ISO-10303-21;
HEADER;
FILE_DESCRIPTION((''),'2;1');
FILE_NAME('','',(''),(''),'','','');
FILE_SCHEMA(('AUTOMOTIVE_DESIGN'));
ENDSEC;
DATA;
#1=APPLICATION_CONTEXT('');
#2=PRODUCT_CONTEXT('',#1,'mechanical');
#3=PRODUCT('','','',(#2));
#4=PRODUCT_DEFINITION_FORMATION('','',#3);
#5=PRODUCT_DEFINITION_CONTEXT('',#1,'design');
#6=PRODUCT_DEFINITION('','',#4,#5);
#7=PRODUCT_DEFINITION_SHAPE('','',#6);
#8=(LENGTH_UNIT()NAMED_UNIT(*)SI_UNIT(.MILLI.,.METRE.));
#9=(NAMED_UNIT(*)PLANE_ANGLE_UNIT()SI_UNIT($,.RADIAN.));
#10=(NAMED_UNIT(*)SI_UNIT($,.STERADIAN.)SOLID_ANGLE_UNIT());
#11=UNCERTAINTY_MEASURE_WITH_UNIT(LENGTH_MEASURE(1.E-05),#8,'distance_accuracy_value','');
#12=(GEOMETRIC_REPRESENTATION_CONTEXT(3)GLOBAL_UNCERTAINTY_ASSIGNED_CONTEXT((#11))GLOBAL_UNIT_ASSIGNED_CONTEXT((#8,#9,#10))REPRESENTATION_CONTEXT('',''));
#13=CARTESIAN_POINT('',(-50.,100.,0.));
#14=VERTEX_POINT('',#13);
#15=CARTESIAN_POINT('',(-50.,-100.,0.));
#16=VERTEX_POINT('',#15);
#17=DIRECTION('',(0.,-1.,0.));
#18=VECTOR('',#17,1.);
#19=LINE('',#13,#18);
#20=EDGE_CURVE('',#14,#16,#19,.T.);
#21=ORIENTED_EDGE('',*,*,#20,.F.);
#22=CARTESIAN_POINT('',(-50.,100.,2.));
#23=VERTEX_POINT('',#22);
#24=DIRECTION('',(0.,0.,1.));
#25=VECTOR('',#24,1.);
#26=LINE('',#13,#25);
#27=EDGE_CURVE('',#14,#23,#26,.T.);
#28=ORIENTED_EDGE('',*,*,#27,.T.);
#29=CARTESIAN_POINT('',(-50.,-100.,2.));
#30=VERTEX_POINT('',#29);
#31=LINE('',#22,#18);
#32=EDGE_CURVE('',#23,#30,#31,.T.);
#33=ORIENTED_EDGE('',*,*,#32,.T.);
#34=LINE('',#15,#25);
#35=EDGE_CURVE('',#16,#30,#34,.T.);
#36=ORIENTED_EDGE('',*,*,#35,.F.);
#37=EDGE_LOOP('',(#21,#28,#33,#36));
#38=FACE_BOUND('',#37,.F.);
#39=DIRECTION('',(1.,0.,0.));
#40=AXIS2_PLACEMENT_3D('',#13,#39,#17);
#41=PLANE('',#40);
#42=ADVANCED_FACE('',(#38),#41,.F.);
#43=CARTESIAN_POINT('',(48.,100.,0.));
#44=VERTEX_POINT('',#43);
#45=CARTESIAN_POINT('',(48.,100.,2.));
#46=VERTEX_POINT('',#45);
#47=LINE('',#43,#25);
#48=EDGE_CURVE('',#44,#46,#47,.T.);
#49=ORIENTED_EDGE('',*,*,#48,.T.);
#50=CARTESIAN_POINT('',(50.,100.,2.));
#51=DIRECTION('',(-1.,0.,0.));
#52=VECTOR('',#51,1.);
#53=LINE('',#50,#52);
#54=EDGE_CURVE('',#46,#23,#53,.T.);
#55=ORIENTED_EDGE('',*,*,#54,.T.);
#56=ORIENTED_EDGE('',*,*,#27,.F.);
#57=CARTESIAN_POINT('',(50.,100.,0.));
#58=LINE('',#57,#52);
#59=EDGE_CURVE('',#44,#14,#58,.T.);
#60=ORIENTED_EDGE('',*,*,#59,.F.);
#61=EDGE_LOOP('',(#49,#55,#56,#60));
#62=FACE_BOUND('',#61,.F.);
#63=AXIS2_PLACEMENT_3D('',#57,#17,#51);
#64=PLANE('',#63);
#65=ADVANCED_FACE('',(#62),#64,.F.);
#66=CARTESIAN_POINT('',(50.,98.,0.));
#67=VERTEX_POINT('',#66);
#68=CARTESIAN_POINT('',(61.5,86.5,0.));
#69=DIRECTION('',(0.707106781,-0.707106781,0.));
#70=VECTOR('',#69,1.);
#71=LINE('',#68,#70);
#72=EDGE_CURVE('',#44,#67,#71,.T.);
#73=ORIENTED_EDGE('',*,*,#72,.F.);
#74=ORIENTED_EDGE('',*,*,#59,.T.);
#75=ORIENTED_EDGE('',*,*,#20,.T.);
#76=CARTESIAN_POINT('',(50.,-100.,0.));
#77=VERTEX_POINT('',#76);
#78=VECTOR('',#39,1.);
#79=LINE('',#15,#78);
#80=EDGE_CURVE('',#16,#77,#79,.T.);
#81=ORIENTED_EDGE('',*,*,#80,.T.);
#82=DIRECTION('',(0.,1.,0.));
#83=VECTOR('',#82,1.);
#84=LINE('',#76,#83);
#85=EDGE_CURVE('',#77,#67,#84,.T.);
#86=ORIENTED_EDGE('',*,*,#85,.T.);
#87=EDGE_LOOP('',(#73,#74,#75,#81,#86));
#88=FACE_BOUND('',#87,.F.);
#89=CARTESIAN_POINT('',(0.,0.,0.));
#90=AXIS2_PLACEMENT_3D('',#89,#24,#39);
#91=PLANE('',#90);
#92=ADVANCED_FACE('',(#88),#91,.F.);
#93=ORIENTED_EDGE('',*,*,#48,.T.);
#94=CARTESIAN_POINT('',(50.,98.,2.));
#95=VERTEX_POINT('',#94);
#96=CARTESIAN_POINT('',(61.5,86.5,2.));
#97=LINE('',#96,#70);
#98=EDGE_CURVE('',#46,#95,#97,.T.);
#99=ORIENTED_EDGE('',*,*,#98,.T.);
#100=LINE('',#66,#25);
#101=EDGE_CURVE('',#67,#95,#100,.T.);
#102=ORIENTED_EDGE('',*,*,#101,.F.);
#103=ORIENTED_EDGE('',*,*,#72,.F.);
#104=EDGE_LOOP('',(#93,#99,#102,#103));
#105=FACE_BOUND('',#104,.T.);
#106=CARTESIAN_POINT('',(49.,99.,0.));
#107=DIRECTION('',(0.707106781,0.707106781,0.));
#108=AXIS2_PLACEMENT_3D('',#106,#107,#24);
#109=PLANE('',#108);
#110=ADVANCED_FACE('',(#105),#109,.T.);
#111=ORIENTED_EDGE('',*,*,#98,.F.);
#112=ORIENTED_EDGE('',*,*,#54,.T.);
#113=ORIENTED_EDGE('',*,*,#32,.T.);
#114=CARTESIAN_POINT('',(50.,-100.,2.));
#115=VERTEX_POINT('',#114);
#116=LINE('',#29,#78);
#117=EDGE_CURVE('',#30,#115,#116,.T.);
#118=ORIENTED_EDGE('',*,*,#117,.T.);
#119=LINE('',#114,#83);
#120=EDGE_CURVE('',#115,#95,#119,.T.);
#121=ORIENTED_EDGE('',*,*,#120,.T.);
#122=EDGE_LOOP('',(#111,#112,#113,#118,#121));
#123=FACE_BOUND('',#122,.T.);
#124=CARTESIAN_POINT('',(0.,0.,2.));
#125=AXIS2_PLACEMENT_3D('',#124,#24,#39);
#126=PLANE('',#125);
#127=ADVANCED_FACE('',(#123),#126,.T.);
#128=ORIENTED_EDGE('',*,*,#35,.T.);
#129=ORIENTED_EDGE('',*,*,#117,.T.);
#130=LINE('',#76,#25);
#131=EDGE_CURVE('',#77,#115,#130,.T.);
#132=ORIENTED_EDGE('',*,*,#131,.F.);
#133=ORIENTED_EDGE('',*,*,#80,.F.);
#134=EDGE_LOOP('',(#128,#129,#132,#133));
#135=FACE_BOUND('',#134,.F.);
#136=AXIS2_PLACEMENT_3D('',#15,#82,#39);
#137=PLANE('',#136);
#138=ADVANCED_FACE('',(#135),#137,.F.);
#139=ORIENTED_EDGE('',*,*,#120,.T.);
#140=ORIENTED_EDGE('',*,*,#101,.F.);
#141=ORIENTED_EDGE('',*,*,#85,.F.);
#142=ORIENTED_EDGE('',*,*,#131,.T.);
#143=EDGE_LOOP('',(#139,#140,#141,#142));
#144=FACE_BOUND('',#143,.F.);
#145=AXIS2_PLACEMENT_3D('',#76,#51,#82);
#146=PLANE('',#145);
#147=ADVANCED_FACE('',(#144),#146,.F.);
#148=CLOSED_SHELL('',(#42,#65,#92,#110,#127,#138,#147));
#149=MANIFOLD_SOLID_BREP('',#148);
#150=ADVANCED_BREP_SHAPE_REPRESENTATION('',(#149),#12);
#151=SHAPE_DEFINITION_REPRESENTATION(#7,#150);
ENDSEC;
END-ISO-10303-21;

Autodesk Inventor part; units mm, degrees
ref_plane "YZ Plane" through (0, 0, 0) normal (1, 0, 0) x (0, 1, 0)
ref_plane "XZ Plane" through (0, 0, 0) normal (0, 1, 0) x (-1, 0, 0)
ref_plane "XY Plane" through (0, 0, 0) normal (0, 0, 1) x (1, 0, 0)
sketch "Sketch1" plane through (0, 0, 0) normal (0, 0, 1) x (1, 0, 0)
  line L0 (-50, -100) -> (50, -100)
  line L1 (50, -100) -> (50, 100)
  line L2 (50, 100) -> (-50, 100)
  line L3 (-50, 100) -> (-50, -100)
  line L4 (-50, -100) -> (50, 100) construction
  line L5 (50, -100) -> (-50, 100) construction
  point P0 (0, 0)
  dimension "d0" = 100
  dimension "d1" = 200
extrude "Plate1" add sketch "Sketch1" along normal blind 2
chamfer "Chamfer1" distance 2 angle 45 1 edges at (50, 100, 1)
sketch "Sketch2" plane through (0, 0, 0) normal (0, 0, -1) x (-1, 0, 0)
  line L0 (-27.4755, 69.5251) -> (-8.9545, 69.5251) construction
  line L1 (-8.9545, 69.5251) -> (-8.9545, 65.7727) construction
  line L2 (-8.9545, 65.7727) -> (-27.4755, 65.7727) construction
  line L3 (-27.4755, 65.7727) -> (-27.4755, 69.5251) construction
  point P0 (0, 0)
mark "Mark1"
equation "\"d2\" = Thickness"
equation "\"BendReliefWidth\" = Thickness"
equation "\"BendReliefDepth\" = 0.5 * Thickness"
equation "\"CornerReliefSize\" = 4 * Thickness"
equation "\"MinimumRemnant\" = 2 * Thickness"
equation "\"TransitionRadius\" = BendRadius"
equation "\"JacobiRadiusSize\" = BendRadius"
equation "\"GapSize\" = Thickness"
equation "\"Thickness\" = 2"
equation "\"BendRadius\" = 2.75"
properties part number "Sheet Metal (DIN)" material "AISI 304"
